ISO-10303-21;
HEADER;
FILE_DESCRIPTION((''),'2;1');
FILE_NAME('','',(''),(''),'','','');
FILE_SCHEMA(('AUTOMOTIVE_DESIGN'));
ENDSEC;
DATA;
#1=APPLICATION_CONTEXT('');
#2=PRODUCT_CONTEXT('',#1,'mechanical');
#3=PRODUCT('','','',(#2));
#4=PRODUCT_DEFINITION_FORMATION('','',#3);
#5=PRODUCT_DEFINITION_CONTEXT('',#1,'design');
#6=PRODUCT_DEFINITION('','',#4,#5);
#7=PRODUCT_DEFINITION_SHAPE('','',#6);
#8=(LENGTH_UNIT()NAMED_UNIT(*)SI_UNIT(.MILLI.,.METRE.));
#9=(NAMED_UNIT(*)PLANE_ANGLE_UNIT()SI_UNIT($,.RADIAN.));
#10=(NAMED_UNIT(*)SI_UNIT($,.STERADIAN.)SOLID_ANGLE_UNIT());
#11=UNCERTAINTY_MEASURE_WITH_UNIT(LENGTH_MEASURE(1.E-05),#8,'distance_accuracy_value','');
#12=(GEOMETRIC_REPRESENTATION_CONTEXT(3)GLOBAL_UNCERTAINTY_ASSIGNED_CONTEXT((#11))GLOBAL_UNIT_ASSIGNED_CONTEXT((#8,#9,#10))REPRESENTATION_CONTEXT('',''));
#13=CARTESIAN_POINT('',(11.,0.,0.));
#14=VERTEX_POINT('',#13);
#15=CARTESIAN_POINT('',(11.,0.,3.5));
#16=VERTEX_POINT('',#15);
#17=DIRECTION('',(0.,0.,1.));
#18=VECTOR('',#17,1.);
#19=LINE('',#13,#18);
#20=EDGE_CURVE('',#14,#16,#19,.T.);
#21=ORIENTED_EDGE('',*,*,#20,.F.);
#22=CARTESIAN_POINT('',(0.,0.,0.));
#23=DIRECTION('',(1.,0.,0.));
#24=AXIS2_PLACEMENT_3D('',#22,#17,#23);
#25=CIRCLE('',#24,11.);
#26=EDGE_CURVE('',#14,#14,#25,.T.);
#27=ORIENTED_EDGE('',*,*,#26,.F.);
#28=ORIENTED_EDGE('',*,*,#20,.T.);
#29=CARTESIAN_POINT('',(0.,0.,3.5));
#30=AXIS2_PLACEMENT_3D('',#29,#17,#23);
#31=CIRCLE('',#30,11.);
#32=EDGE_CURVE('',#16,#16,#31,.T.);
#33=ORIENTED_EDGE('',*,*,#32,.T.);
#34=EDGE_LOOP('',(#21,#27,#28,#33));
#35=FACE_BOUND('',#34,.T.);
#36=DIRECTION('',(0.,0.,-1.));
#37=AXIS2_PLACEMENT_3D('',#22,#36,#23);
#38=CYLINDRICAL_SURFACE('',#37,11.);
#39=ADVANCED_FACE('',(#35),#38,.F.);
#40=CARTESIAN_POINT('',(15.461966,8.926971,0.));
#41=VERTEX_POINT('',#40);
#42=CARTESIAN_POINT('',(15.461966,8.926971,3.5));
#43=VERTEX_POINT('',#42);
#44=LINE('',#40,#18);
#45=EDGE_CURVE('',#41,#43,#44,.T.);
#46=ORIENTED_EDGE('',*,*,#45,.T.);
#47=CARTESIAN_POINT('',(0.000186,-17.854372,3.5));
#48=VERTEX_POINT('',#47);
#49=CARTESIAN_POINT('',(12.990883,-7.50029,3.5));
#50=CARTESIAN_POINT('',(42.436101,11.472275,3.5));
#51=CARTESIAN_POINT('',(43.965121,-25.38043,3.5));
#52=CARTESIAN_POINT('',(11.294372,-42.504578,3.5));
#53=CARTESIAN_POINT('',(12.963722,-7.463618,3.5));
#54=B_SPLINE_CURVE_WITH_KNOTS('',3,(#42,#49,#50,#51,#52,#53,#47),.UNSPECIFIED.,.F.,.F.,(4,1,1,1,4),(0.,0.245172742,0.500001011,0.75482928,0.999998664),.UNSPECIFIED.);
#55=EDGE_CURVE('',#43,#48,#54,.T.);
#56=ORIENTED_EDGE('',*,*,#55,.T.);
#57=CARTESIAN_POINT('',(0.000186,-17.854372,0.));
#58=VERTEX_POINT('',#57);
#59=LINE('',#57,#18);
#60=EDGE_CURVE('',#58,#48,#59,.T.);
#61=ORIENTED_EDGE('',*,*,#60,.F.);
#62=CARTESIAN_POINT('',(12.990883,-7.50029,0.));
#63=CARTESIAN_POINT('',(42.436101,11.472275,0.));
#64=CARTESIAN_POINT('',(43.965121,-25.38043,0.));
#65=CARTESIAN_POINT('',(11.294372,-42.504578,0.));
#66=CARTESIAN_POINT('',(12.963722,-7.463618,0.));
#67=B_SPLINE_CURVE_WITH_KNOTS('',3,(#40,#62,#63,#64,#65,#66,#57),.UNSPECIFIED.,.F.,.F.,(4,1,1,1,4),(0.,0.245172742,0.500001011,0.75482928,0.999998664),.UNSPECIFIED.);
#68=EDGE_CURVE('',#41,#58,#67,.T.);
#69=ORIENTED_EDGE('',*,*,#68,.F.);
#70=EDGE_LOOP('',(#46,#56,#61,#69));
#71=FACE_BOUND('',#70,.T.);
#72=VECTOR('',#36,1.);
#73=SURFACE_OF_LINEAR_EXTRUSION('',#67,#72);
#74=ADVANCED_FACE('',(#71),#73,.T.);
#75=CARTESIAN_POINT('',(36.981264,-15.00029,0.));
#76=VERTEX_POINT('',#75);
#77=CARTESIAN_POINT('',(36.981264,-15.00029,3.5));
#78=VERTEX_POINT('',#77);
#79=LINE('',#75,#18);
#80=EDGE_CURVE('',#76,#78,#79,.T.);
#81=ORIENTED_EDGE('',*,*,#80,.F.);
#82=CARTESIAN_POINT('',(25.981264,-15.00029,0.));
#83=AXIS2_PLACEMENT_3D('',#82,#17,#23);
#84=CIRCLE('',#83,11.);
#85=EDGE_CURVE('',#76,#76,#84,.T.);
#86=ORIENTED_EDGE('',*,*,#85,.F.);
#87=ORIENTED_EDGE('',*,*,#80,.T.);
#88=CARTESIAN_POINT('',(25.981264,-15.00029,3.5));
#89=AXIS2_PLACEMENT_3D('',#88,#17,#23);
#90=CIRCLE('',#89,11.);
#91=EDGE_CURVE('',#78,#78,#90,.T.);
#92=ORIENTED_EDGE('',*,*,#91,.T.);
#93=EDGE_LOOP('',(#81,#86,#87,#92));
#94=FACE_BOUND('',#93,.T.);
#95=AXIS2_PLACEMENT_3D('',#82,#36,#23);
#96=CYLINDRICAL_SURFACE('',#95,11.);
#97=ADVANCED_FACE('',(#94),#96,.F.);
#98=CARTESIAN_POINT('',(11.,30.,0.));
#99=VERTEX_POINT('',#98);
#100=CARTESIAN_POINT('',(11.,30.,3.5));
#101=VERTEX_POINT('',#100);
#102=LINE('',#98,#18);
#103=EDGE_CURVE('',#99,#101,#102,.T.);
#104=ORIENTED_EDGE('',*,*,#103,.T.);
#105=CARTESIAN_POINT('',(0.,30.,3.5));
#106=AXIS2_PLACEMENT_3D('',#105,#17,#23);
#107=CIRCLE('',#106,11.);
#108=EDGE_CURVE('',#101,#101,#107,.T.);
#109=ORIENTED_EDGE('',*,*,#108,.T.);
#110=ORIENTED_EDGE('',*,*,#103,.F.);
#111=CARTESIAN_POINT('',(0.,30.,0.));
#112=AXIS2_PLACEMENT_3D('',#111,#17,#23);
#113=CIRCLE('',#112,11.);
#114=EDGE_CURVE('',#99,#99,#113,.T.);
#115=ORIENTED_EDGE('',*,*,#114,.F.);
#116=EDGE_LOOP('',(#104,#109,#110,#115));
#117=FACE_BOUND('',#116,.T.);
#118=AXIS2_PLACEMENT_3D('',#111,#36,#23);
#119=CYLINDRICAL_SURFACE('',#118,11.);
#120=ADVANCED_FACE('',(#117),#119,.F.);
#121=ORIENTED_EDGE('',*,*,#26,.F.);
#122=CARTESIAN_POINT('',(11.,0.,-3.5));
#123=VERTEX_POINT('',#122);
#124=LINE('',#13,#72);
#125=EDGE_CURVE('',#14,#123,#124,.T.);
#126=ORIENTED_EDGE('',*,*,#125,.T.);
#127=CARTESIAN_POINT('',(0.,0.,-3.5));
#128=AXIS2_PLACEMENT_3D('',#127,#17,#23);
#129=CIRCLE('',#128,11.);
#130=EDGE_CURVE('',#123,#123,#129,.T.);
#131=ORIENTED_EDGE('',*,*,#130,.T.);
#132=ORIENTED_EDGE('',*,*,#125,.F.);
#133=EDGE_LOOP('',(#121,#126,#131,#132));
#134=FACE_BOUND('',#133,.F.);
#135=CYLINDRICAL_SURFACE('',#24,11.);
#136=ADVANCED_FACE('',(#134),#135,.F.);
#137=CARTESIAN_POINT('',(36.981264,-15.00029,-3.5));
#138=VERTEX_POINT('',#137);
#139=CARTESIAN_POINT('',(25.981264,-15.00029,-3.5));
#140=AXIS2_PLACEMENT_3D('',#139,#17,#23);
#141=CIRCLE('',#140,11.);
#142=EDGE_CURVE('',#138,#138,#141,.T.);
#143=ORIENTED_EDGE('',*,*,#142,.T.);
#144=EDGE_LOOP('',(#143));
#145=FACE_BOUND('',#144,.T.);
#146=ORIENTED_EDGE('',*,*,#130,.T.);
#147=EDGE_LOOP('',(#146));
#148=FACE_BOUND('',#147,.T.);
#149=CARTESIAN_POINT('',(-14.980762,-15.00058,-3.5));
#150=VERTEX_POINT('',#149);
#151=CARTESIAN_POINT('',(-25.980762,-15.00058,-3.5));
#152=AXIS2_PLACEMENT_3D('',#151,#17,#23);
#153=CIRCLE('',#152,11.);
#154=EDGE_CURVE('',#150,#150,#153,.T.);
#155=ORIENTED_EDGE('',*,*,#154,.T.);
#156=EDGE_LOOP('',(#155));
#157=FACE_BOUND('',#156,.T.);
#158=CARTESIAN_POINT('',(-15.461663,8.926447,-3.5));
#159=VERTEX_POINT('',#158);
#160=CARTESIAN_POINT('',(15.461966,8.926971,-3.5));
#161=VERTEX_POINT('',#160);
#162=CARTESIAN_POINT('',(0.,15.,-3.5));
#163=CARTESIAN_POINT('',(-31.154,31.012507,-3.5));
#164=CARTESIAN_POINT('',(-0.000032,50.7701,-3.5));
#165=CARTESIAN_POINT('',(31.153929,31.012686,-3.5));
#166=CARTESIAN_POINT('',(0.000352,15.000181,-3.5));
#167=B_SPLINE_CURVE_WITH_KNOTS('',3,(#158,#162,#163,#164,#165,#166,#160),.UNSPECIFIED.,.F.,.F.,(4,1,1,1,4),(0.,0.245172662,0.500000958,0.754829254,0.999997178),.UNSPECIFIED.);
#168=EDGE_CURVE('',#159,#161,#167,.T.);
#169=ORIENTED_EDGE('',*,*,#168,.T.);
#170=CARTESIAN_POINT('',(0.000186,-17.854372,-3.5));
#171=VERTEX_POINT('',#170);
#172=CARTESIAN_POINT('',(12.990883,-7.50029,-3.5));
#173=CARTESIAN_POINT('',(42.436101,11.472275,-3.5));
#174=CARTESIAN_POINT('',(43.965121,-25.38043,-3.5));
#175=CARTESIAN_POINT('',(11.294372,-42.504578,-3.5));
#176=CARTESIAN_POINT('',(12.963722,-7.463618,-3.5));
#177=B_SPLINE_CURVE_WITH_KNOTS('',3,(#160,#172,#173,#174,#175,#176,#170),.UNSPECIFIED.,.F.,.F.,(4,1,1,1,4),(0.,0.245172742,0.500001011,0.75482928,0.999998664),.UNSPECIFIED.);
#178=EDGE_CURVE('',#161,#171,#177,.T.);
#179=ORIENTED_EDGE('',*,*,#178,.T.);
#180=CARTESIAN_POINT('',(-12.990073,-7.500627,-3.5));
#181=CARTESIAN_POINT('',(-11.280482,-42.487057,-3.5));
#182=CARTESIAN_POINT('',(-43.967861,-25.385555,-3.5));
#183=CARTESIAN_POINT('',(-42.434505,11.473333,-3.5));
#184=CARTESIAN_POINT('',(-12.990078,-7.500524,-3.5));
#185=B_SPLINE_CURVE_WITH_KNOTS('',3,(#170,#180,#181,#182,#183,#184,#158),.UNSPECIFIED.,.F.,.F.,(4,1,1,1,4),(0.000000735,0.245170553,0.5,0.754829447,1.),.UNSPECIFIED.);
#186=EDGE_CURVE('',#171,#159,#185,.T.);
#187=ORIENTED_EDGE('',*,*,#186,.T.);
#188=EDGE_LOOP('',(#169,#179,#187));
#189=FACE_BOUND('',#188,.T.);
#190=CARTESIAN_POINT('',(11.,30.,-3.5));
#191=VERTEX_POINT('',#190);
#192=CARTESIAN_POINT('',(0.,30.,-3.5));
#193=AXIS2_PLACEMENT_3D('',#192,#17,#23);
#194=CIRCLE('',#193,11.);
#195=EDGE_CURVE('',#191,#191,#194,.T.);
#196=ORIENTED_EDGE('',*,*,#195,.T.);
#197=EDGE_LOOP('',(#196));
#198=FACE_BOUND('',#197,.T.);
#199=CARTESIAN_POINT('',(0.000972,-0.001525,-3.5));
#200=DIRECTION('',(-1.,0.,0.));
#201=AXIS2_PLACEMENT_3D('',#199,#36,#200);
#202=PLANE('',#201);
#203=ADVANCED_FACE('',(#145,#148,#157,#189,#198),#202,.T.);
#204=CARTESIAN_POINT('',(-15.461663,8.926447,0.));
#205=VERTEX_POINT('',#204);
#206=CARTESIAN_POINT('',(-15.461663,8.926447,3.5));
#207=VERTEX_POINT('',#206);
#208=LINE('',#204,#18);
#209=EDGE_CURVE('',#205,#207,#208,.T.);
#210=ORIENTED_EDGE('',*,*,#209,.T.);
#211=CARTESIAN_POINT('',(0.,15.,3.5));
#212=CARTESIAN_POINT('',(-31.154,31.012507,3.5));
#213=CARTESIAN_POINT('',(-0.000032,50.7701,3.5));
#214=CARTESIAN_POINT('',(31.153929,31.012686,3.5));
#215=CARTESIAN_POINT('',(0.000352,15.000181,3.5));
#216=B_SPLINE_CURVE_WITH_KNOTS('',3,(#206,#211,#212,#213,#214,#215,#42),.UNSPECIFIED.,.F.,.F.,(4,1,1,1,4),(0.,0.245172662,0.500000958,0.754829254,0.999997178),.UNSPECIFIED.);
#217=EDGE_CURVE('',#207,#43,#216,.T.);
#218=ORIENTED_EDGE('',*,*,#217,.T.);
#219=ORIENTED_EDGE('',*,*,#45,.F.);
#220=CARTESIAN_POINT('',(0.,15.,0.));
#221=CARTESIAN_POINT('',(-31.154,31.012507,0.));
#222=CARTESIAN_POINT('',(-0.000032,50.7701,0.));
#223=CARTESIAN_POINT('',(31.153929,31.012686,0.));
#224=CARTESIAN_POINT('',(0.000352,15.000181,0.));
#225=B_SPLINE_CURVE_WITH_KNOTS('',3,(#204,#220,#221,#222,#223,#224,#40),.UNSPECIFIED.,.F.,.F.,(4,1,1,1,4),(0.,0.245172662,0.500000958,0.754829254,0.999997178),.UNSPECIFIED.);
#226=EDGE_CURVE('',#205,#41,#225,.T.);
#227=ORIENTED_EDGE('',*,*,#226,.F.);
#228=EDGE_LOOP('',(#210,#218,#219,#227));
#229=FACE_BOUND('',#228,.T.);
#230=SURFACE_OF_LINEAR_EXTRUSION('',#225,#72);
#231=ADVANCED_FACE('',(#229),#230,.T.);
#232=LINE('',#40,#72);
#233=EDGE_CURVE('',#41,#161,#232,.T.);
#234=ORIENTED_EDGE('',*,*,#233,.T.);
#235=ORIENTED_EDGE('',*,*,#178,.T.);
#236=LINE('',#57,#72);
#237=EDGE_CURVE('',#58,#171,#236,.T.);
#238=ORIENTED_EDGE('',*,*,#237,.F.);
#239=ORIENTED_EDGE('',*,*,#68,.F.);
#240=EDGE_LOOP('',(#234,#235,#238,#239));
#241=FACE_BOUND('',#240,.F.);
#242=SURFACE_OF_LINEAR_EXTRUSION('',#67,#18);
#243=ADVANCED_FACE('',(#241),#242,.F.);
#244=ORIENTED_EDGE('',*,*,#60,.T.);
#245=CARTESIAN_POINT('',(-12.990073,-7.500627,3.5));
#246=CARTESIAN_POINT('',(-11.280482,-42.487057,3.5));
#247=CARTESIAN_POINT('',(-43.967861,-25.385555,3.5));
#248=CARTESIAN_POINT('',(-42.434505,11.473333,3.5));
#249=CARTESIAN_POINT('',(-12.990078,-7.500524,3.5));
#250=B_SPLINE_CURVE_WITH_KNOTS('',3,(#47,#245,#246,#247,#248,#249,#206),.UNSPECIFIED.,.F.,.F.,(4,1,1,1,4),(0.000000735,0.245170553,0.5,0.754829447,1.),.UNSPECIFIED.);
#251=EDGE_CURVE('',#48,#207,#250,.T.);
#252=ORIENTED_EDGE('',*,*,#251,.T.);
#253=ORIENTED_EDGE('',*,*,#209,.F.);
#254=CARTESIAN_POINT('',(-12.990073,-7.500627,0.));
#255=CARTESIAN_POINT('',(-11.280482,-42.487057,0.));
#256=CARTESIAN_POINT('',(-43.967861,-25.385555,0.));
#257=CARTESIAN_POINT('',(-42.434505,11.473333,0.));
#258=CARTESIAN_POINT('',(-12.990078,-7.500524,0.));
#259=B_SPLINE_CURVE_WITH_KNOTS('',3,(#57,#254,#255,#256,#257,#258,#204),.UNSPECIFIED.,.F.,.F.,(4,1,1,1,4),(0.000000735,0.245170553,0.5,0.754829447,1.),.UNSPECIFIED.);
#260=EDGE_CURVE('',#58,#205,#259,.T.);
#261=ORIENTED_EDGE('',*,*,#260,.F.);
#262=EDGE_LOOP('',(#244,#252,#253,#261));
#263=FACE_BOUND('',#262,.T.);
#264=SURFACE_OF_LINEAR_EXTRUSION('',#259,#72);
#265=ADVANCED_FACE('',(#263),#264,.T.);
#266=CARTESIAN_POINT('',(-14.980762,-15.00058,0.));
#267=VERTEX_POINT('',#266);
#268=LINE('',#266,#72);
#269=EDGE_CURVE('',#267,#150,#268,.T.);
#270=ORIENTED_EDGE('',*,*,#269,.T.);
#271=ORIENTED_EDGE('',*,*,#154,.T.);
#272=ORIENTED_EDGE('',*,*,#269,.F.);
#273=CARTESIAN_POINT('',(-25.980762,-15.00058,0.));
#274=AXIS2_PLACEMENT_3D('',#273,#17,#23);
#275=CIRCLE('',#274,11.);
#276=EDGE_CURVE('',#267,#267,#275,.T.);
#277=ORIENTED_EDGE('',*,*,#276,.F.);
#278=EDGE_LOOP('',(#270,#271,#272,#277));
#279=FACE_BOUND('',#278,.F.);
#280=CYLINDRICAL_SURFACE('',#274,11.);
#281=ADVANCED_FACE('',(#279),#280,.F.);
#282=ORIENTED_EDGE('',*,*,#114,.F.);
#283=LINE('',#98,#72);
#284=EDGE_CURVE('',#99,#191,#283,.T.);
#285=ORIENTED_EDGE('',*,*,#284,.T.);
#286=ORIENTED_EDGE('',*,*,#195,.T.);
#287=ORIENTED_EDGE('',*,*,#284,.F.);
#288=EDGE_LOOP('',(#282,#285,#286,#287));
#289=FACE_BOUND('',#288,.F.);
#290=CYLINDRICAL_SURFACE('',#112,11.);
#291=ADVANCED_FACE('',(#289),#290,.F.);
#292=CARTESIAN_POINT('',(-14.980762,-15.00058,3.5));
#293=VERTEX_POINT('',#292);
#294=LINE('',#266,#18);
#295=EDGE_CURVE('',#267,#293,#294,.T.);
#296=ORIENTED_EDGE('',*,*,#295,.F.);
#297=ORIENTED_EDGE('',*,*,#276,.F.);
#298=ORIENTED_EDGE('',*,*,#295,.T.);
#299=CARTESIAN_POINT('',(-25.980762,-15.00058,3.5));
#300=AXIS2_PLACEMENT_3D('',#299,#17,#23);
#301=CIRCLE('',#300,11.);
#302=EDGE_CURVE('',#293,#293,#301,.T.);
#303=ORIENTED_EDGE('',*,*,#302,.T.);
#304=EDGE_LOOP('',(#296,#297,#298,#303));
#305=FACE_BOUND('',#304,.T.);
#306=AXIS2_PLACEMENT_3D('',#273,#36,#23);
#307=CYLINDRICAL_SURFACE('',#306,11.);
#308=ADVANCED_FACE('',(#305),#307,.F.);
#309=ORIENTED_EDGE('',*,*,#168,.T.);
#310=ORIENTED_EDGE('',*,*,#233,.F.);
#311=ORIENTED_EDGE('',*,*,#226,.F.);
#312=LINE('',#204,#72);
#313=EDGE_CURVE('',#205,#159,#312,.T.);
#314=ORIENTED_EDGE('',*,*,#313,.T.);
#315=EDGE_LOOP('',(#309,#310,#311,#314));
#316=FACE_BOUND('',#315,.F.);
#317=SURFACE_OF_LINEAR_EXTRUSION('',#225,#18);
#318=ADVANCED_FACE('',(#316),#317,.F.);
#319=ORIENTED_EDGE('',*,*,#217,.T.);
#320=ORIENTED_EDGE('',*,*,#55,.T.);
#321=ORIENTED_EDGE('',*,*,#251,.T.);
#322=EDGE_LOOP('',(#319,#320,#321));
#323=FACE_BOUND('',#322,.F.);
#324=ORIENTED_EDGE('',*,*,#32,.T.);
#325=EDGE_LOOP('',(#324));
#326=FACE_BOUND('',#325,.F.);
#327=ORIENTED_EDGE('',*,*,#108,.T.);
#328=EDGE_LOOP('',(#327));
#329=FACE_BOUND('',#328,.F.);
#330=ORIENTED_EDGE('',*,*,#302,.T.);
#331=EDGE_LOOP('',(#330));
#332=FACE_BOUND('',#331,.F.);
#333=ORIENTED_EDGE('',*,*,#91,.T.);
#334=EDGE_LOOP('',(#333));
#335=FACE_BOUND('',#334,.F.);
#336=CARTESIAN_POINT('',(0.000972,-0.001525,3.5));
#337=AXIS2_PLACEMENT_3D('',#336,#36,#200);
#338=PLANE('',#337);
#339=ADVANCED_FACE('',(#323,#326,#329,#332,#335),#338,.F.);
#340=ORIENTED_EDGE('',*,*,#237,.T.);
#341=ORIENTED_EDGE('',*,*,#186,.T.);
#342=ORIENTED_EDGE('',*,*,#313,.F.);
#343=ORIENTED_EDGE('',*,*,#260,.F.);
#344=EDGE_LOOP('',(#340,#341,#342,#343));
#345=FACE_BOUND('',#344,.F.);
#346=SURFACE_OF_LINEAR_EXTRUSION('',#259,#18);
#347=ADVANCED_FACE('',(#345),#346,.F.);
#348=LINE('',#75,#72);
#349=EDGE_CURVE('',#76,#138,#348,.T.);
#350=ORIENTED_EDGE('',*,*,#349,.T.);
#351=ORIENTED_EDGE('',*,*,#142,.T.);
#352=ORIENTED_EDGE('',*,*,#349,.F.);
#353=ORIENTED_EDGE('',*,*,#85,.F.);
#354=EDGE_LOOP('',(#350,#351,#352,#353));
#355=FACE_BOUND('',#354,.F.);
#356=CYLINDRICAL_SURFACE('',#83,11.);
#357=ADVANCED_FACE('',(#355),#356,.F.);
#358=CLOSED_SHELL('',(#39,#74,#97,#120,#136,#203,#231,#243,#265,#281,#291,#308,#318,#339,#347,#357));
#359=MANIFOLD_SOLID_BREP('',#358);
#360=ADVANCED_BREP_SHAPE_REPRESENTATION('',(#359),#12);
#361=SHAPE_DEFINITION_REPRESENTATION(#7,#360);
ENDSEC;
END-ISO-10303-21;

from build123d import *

# Parameters (mm, degrees)
F0_R     = 11
F1_DEPTH = 3.5


# Not quite as in the source:
# - ends of sketch curves that miss each other by under 0.0002 mm in the source are joined


with BuildPart() as f1:
    # F0 (on Top) → F1 (new body, symmetric)
    with BuildSketch(Plane.XY):
        with BuildLine():
            add(Edge.make_bspline(
                [(0.0001862709, -17.854371812), (-12.9900730105, -7.5006266371), (-11.2804815695, -42.4870572563), (-43.9678605577, -25.3855549258), (-42.4345050326, 11.4733326926), (-12.9900780334, -7.5005238465), (-15.4616634595, 8.9264466646)],
                knots=[7.345e-07, 7.345e-07, 7.345e-07, 7.345e-07, 0.2451705527, 0.5, 0.7548294473, 1, 1, 1, 1], degree=3))
            add(Edge.make_bspline(
                [(15.4619664829, 8.9269705111), (12.9908834331, -7.5002900471), (42.4361006075, 11.4722752907), (43.9651206921, -25.3804304153), (11.2943720802, -42.5045779891), (12.96372192, -7.4636177935), (0.0001862709, -17.854371812)],
                knots=[0, 0, 0, 0, 0.2451727415, 0.5000010107, 0.7548292798, 0.9999986639, 0.9999986639, 0.9999986639, 0.9999986639], degree=3))
            add(Edge.make_bspline(
                [(-15.4616634595, 8.9264466646), (0, 15), (-31.1540001349, 31.0125066494), (-3.16279e-05, 50.7701004871), (31.1539286772, 31.0126855588), (0.0003516695, 15.0001807525), (15.4619664829, 8.9269705111)],
                knots=[0, 0, 0, 0, 0.2451726624, 0.5000009582, 0.7548292541, 0.999997178, 0.999997178, 0.999997178, 0.999997178], degree=3))
        make_face()
        with Locations((-25.9807621135, -15.0005800942)):
            Circle(F0_R, mode=Mode.SUBTRACT)
        Circle(F0_R, mode=Mode.SUBTRACT)
        with Locations((25.9812644899, -15.0002900471)):
            Circle(F0_R, mode=Mode.SUBTRACT)
        with Locations((0, 30)):
            Circle(F0_R, mode=Mode.SUBTRACT)
    extrude(amount=F1_DEPTH, both=True)


solid = f1.part
